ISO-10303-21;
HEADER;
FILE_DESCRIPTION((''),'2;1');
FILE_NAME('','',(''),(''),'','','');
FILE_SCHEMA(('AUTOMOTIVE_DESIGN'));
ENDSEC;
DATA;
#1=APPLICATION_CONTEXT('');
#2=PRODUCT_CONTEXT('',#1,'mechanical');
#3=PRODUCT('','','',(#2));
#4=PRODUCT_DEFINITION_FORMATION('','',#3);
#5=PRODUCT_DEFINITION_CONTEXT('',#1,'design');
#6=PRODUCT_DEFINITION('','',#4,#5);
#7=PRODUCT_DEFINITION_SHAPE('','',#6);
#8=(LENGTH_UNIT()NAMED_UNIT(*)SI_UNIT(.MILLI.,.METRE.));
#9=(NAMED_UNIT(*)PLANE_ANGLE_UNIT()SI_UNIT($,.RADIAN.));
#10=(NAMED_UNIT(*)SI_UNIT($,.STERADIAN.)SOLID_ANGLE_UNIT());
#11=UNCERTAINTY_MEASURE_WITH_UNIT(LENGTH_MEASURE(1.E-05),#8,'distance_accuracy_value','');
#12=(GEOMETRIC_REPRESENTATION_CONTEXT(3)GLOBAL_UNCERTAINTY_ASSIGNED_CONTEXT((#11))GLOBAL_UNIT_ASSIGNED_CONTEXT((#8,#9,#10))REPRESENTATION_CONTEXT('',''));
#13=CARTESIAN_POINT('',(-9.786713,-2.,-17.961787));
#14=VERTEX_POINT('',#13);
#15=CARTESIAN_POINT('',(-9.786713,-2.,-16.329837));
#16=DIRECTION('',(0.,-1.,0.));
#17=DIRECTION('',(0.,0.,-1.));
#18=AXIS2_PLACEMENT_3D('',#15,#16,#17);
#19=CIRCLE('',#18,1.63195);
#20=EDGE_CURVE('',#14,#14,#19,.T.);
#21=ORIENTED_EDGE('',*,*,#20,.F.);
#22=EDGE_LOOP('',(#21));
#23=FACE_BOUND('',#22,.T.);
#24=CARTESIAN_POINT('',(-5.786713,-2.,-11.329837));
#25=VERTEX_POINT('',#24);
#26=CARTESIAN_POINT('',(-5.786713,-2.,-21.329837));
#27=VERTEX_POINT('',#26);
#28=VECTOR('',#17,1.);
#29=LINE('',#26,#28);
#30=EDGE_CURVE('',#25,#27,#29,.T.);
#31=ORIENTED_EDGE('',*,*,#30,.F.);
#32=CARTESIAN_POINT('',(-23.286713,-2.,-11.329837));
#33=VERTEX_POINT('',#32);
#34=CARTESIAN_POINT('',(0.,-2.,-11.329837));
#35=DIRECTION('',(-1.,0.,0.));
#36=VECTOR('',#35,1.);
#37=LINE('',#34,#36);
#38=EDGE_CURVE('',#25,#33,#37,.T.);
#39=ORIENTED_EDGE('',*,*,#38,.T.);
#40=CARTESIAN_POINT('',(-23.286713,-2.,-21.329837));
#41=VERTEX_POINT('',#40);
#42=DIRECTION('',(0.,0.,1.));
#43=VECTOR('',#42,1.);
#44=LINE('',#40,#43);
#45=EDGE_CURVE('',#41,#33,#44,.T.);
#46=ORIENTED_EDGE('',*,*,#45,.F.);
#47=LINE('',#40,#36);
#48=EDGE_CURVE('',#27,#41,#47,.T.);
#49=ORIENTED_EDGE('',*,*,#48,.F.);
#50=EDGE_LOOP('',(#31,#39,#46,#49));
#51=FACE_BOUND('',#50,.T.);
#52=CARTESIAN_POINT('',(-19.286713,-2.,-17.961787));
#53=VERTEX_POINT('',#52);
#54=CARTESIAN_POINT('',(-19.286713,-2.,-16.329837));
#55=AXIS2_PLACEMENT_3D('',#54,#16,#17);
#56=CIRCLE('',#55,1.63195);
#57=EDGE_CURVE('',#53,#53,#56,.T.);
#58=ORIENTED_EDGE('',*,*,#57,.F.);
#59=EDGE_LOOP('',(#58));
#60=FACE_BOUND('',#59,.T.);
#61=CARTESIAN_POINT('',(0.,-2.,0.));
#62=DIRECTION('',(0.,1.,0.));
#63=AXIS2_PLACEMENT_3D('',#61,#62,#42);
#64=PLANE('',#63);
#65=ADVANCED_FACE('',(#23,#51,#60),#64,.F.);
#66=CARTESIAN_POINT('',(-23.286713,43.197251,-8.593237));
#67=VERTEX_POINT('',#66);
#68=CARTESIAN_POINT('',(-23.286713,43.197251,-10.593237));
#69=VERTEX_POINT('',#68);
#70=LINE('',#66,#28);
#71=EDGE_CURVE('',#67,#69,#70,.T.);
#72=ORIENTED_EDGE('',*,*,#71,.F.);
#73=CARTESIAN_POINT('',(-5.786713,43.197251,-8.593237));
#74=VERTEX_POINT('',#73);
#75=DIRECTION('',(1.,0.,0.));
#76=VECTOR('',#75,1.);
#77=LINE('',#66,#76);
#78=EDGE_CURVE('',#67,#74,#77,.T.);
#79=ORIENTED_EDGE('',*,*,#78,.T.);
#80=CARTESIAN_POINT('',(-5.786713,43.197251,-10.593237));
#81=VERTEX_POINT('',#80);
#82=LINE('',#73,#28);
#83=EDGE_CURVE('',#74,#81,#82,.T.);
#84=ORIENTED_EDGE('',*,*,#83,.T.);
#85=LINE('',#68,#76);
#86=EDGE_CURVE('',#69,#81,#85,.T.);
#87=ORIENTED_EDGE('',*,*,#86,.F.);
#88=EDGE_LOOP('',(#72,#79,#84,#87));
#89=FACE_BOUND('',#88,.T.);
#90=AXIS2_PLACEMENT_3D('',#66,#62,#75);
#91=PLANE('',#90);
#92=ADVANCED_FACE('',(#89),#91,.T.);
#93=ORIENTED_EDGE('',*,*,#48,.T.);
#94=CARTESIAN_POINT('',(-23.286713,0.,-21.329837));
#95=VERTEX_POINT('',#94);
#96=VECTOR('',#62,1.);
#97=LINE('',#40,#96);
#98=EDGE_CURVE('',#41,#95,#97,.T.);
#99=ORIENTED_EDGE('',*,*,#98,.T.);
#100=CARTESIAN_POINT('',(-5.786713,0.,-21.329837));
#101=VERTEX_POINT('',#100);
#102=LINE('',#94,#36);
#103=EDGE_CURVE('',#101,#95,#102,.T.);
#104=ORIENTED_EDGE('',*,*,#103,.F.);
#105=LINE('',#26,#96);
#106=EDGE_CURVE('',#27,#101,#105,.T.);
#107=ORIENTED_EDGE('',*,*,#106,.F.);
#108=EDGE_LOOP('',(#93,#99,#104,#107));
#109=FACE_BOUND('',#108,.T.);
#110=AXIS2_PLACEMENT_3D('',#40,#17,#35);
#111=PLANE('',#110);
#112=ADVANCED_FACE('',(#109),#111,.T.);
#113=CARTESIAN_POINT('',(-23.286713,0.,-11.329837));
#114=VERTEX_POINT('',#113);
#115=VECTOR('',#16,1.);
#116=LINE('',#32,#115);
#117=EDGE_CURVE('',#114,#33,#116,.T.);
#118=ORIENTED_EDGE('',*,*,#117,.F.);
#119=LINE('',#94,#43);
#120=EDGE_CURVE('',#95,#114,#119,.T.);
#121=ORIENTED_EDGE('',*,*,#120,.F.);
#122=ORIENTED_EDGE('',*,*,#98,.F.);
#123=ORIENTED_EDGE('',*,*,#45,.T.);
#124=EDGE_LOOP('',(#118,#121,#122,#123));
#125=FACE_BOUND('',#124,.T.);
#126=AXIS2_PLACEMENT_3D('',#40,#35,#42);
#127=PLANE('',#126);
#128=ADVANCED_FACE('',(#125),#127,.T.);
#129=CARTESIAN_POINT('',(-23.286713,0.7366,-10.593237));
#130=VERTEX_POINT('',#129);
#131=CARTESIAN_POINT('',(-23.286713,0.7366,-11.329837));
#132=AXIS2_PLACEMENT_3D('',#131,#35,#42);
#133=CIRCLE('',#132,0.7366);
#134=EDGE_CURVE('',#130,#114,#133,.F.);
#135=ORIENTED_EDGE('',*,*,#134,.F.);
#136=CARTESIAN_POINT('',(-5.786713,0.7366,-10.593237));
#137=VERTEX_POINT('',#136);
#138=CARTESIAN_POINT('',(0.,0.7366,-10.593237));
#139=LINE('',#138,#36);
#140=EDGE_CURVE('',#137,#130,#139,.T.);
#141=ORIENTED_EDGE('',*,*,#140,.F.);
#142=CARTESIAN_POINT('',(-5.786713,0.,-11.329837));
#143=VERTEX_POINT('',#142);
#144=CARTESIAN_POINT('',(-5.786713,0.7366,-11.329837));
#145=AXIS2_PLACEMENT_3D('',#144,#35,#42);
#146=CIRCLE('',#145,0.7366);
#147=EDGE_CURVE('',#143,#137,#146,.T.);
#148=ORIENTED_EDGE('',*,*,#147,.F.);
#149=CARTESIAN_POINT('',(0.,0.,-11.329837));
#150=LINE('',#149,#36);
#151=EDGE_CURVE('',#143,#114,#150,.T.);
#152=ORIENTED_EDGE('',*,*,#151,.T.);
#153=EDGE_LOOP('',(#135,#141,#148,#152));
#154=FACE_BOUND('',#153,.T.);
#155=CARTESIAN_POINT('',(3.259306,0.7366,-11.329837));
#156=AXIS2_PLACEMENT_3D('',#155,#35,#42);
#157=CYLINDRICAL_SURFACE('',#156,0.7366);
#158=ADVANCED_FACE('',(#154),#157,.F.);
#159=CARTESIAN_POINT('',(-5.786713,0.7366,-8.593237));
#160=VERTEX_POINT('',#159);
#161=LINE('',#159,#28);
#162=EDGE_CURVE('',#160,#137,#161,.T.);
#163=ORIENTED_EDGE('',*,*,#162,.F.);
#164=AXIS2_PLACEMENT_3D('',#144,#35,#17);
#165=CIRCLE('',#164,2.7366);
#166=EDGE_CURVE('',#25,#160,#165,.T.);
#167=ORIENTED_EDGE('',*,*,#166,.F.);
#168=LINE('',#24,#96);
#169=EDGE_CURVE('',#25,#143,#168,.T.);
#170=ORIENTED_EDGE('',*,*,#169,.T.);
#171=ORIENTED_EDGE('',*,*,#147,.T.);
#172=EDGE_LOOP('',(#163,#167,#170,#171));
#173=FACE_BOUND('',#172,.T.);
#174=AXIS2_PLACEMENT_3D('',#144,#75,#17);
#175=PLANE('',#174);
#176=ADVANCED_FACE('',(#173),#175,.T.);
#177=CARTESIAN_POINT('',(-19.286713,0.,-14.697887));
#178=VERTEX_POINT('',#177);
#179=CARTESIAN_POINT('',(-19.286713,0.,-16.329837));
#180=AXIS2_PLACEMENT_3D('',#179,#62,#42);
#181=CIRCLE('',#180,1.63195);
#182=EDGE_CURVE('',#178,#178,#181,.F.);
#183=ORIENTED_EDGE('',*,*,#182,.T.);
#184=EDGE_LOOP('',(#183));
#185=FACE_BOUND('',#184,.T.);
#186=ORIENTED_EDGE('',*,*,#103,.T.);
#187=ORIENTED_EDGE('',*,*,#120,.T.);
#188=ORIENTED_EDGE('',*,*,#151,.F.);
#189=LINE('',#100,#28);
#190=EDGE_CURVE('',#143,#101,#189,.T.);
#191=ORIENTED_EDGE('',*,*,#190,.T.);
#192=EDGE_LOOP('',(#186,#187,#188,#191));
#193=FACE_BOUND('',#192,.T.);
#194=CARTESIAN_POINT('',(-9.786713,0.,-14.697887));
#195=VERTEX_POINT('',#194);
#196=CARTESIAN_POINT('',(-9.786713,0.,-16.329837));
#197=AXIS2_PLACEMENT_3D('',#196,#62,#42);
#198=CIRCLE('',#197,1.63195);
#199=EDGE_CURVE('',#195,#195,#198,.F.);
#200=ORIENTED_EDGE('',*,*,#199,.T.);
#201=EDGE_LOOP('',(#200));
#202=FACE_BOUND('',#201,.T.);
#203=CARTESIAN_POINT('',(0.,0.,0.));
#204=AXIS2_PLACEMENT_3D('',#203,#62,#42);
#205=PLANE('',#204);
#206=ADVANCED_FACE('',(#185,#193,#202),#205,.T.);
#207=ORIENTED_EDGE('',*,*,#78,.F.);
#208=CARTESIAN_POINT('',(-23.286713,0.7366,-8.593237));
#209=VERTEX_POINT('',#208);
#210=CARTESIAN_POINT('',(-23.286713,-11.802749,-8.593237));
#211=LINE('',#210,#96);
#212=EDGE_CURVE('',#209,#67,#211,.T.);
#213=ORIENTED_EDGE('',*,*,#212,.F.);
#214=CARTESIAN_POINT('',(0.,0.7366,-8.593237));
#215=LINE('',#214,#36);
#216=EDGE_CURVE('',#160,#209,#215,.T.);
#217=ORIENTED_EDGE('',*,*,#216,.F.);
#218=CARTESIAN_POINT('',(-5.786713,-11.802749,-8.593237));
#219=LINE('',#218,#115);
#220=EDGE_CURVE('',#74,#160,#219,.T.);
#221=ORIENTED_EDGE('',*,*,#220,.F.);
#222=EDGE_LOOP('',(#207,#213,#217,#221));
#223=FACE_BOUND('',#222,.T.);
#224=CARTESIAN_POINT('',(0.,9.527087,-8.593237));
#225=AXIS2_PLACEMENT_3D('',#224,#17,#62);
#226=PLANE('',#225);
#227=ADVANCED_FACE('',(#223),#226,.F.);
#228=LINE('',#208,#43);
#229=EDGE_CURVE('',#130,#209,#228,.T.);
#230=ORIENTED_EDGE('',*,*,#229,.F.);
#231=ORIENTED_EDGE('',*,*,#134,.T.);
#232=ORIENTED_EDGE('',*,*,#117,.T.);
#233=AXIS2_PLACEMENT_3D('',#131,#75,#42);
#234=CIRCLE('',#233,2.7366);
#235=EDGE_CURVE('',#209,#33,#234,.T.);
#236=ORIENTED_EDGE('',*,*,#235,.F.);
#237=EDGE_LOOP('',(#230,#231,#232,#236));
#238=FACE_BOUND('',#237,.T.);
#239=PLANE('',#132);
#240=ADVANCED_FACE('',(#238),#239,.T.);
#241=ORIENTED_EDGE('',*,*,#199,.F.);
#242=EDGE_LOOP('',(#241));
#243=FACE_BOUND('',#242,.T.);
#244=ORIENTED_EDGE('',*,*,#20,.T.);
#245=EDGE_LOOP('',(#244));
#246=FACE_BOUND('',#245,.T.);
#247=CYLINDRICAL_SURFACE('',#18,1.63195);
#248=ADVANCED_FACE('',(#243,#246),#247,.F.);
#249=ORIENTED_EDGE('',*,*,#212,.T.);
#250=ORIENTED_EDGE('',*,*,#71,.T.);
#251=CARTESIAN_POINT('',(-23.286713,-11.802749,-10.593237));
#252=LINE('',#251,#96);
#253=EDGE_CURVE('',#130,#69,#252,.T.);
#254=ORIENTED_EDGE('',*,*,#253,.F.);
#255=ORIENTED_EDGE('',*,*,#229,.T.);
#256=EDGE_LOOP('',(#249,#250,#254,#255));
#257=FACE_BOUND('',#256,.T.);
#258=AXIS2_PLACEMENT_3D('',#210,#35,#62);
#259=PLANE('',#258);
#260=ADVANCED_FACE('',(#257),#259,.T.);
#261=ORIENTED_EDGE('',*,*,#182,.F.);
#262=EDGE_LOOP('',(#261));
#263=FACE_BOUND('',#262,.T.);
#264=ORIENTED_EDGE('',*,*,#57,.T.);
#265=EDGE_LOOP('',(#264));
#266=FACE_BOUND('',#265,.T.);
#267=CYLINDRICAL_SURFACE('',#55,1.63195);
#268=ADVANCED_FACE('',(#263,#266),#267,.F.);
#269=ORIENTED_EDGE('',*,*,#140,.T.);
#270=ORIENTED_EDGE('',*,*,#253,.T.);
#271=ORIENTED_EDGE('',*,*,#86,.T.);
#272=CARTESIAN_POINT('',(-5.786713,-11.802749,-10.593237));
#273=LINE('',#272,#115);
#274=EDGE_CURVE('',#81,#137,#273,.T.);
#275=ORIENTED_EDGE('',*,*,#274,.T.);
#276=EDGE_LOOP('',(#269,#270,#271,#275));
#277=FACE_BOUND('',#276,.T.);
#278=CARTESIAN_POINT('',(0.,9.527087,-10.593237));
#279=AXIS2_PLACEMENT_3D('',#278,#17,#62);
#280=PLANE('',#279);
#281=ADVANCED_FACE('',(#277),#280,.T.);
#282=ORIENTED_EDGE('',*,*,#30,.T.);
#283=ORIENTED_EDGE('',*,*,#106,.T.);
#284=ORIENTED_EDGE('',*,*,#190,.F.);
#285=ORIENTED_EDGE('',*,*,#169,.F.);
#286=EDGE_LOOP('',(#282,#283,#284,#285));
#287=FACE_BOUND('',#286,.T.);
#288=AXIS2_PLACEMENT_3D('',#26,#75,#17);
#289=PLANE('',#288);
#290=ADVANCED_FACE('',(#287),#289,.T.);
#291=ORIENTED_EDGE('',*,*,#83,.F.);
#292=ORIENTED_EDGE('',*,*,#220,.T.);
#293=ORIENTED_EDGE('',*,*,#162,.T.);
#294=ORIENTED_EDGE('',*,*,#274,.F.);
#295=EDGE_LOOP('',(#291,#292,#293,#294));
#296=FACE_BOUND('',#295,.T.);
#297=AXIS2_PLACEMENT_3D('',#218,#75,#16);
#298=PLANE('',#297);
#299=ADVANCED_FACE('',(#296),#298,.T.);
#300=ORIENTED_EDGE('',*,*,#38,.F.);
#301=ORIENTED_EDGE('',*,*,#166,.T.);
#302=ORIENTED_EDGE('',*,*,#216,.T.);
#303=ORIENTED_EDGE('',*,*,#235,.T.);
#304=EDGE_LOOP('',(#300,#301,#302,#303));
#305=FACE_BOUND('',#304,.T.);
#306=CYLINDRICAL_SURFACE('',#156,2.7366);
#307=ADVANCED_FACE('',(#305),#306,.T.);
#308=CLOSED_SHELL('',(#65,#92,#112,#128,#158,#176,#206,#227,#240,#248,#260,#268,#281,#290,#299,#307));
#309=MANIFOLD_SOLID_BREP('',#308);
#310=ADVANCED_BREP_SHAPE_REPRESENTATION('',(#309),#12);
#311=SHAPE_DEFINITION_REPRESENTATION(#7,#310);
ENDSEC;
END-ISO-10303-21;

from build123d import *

# Parameters (mm, degrees)
SKETCH1_W                 = 17.5
SKETCH1_H                 = 55
BASE_FLANGE1_DEPTH        = 2
SKETCHED_START            = -23.286713287
SKETCHED_BEND3_DEPTH      = 17.5
SKETCHED_BEND3_2_DEPTH    = 17.5
F_4_CLEARANCE_HOLE1_D     = 3.2639
F_4_CLEARANCE_HOLE1_DEPTH = 2
F_4_CLEARANCE_HOLE1_TIP   = 0.980574487


# Read off the part's stored shape, not the designer's step: Sketched Bend3
# Sheet-metal steps are written as plain solids
with BuildPart() as part:
    # Sketch1 → Base-Flange1 (new body)
    with BuildSketch(Plane(origin=(0, 0, 0), x_dir=(1, 0, 0), z_dir=(0, 1, 0))):
        with Locations((-14.536713287, -6.17016317)):
            Rectangle(SKETCH1_W, SKETCH1_H)
    extrude(amount=-BASE_FLANGE1_DEPTH)

    # Sketched Bend3 outline → Sketched Bend3 (cut)
    with BuildSketch(Plane.YZ.offset(SKETCHED_START)):
        with BuildLine():
            ThreePointArc((-2, -11.32983683), (-1.443395312, -9.675569621), (0, -8.694234432))
            Line((0, -8.694234432), (0, 33.67016317))
            Line((0, 33.67016317), (-2, 33.67016317))
            Line((-2, 33.67016317), (-2, -11.32983683))
        make_face()
    extrude(amount=SKETCHED_BEND3_DEPTH, mode=Mode.SUBTRACT)

    # Sketched Bend3 2 outline → Sketched Bend3 2 (add)
    with BuildSketch(Plane.YZ.offset(SKETCHED_START)):
        with BuildLine():
            ThreePointArc((0, -11.32983683), (0.215745145, -10.808981975), (0.7366, -10.59323683))
            Line((0.7366, -10.59323683), (43.197250658, -10.59323683))
            Line((43.197250658, -10.59323683), (43.197250658, -8.59323683))
            Line((43.197250658, -8.59323683), (0.7366, -8.59323683))
            ThreePointArc((0.7366, -8.59323683), (0.364854094, -8.6186038), (0, -8.694234432))
            Line((0, -8.694234432), (0, -11.32983683))
        make_face()
    extrude(amount=SKETCHED_BEND3_2_DEPTH)

    # #4 Clearance Hole1
    with Locations(Plane.XZ.offset(2)):
        with Locations((-9.786713287, -16.32983683), (-19.286713287, -16.32983683)):
            Hole(F_4_CLEARANCE_HOLE1_D / 2, depth=F_4_CLEARANCE_HOLE1_DEPTH)
            with Locations((0, 0, -(F_4_CLEARANCE_HOLE1_DEPTH + F_4_CLEARANCE_HOLE1_TIP / 2))):  # 118° drill point
                Cone(0, F_4_CLEARANCE_HOLE1_D / 2, F_4_CLEARANCE_HOLE1_TIP, mode=Mode.SUBTRACT)


solid = part.part
